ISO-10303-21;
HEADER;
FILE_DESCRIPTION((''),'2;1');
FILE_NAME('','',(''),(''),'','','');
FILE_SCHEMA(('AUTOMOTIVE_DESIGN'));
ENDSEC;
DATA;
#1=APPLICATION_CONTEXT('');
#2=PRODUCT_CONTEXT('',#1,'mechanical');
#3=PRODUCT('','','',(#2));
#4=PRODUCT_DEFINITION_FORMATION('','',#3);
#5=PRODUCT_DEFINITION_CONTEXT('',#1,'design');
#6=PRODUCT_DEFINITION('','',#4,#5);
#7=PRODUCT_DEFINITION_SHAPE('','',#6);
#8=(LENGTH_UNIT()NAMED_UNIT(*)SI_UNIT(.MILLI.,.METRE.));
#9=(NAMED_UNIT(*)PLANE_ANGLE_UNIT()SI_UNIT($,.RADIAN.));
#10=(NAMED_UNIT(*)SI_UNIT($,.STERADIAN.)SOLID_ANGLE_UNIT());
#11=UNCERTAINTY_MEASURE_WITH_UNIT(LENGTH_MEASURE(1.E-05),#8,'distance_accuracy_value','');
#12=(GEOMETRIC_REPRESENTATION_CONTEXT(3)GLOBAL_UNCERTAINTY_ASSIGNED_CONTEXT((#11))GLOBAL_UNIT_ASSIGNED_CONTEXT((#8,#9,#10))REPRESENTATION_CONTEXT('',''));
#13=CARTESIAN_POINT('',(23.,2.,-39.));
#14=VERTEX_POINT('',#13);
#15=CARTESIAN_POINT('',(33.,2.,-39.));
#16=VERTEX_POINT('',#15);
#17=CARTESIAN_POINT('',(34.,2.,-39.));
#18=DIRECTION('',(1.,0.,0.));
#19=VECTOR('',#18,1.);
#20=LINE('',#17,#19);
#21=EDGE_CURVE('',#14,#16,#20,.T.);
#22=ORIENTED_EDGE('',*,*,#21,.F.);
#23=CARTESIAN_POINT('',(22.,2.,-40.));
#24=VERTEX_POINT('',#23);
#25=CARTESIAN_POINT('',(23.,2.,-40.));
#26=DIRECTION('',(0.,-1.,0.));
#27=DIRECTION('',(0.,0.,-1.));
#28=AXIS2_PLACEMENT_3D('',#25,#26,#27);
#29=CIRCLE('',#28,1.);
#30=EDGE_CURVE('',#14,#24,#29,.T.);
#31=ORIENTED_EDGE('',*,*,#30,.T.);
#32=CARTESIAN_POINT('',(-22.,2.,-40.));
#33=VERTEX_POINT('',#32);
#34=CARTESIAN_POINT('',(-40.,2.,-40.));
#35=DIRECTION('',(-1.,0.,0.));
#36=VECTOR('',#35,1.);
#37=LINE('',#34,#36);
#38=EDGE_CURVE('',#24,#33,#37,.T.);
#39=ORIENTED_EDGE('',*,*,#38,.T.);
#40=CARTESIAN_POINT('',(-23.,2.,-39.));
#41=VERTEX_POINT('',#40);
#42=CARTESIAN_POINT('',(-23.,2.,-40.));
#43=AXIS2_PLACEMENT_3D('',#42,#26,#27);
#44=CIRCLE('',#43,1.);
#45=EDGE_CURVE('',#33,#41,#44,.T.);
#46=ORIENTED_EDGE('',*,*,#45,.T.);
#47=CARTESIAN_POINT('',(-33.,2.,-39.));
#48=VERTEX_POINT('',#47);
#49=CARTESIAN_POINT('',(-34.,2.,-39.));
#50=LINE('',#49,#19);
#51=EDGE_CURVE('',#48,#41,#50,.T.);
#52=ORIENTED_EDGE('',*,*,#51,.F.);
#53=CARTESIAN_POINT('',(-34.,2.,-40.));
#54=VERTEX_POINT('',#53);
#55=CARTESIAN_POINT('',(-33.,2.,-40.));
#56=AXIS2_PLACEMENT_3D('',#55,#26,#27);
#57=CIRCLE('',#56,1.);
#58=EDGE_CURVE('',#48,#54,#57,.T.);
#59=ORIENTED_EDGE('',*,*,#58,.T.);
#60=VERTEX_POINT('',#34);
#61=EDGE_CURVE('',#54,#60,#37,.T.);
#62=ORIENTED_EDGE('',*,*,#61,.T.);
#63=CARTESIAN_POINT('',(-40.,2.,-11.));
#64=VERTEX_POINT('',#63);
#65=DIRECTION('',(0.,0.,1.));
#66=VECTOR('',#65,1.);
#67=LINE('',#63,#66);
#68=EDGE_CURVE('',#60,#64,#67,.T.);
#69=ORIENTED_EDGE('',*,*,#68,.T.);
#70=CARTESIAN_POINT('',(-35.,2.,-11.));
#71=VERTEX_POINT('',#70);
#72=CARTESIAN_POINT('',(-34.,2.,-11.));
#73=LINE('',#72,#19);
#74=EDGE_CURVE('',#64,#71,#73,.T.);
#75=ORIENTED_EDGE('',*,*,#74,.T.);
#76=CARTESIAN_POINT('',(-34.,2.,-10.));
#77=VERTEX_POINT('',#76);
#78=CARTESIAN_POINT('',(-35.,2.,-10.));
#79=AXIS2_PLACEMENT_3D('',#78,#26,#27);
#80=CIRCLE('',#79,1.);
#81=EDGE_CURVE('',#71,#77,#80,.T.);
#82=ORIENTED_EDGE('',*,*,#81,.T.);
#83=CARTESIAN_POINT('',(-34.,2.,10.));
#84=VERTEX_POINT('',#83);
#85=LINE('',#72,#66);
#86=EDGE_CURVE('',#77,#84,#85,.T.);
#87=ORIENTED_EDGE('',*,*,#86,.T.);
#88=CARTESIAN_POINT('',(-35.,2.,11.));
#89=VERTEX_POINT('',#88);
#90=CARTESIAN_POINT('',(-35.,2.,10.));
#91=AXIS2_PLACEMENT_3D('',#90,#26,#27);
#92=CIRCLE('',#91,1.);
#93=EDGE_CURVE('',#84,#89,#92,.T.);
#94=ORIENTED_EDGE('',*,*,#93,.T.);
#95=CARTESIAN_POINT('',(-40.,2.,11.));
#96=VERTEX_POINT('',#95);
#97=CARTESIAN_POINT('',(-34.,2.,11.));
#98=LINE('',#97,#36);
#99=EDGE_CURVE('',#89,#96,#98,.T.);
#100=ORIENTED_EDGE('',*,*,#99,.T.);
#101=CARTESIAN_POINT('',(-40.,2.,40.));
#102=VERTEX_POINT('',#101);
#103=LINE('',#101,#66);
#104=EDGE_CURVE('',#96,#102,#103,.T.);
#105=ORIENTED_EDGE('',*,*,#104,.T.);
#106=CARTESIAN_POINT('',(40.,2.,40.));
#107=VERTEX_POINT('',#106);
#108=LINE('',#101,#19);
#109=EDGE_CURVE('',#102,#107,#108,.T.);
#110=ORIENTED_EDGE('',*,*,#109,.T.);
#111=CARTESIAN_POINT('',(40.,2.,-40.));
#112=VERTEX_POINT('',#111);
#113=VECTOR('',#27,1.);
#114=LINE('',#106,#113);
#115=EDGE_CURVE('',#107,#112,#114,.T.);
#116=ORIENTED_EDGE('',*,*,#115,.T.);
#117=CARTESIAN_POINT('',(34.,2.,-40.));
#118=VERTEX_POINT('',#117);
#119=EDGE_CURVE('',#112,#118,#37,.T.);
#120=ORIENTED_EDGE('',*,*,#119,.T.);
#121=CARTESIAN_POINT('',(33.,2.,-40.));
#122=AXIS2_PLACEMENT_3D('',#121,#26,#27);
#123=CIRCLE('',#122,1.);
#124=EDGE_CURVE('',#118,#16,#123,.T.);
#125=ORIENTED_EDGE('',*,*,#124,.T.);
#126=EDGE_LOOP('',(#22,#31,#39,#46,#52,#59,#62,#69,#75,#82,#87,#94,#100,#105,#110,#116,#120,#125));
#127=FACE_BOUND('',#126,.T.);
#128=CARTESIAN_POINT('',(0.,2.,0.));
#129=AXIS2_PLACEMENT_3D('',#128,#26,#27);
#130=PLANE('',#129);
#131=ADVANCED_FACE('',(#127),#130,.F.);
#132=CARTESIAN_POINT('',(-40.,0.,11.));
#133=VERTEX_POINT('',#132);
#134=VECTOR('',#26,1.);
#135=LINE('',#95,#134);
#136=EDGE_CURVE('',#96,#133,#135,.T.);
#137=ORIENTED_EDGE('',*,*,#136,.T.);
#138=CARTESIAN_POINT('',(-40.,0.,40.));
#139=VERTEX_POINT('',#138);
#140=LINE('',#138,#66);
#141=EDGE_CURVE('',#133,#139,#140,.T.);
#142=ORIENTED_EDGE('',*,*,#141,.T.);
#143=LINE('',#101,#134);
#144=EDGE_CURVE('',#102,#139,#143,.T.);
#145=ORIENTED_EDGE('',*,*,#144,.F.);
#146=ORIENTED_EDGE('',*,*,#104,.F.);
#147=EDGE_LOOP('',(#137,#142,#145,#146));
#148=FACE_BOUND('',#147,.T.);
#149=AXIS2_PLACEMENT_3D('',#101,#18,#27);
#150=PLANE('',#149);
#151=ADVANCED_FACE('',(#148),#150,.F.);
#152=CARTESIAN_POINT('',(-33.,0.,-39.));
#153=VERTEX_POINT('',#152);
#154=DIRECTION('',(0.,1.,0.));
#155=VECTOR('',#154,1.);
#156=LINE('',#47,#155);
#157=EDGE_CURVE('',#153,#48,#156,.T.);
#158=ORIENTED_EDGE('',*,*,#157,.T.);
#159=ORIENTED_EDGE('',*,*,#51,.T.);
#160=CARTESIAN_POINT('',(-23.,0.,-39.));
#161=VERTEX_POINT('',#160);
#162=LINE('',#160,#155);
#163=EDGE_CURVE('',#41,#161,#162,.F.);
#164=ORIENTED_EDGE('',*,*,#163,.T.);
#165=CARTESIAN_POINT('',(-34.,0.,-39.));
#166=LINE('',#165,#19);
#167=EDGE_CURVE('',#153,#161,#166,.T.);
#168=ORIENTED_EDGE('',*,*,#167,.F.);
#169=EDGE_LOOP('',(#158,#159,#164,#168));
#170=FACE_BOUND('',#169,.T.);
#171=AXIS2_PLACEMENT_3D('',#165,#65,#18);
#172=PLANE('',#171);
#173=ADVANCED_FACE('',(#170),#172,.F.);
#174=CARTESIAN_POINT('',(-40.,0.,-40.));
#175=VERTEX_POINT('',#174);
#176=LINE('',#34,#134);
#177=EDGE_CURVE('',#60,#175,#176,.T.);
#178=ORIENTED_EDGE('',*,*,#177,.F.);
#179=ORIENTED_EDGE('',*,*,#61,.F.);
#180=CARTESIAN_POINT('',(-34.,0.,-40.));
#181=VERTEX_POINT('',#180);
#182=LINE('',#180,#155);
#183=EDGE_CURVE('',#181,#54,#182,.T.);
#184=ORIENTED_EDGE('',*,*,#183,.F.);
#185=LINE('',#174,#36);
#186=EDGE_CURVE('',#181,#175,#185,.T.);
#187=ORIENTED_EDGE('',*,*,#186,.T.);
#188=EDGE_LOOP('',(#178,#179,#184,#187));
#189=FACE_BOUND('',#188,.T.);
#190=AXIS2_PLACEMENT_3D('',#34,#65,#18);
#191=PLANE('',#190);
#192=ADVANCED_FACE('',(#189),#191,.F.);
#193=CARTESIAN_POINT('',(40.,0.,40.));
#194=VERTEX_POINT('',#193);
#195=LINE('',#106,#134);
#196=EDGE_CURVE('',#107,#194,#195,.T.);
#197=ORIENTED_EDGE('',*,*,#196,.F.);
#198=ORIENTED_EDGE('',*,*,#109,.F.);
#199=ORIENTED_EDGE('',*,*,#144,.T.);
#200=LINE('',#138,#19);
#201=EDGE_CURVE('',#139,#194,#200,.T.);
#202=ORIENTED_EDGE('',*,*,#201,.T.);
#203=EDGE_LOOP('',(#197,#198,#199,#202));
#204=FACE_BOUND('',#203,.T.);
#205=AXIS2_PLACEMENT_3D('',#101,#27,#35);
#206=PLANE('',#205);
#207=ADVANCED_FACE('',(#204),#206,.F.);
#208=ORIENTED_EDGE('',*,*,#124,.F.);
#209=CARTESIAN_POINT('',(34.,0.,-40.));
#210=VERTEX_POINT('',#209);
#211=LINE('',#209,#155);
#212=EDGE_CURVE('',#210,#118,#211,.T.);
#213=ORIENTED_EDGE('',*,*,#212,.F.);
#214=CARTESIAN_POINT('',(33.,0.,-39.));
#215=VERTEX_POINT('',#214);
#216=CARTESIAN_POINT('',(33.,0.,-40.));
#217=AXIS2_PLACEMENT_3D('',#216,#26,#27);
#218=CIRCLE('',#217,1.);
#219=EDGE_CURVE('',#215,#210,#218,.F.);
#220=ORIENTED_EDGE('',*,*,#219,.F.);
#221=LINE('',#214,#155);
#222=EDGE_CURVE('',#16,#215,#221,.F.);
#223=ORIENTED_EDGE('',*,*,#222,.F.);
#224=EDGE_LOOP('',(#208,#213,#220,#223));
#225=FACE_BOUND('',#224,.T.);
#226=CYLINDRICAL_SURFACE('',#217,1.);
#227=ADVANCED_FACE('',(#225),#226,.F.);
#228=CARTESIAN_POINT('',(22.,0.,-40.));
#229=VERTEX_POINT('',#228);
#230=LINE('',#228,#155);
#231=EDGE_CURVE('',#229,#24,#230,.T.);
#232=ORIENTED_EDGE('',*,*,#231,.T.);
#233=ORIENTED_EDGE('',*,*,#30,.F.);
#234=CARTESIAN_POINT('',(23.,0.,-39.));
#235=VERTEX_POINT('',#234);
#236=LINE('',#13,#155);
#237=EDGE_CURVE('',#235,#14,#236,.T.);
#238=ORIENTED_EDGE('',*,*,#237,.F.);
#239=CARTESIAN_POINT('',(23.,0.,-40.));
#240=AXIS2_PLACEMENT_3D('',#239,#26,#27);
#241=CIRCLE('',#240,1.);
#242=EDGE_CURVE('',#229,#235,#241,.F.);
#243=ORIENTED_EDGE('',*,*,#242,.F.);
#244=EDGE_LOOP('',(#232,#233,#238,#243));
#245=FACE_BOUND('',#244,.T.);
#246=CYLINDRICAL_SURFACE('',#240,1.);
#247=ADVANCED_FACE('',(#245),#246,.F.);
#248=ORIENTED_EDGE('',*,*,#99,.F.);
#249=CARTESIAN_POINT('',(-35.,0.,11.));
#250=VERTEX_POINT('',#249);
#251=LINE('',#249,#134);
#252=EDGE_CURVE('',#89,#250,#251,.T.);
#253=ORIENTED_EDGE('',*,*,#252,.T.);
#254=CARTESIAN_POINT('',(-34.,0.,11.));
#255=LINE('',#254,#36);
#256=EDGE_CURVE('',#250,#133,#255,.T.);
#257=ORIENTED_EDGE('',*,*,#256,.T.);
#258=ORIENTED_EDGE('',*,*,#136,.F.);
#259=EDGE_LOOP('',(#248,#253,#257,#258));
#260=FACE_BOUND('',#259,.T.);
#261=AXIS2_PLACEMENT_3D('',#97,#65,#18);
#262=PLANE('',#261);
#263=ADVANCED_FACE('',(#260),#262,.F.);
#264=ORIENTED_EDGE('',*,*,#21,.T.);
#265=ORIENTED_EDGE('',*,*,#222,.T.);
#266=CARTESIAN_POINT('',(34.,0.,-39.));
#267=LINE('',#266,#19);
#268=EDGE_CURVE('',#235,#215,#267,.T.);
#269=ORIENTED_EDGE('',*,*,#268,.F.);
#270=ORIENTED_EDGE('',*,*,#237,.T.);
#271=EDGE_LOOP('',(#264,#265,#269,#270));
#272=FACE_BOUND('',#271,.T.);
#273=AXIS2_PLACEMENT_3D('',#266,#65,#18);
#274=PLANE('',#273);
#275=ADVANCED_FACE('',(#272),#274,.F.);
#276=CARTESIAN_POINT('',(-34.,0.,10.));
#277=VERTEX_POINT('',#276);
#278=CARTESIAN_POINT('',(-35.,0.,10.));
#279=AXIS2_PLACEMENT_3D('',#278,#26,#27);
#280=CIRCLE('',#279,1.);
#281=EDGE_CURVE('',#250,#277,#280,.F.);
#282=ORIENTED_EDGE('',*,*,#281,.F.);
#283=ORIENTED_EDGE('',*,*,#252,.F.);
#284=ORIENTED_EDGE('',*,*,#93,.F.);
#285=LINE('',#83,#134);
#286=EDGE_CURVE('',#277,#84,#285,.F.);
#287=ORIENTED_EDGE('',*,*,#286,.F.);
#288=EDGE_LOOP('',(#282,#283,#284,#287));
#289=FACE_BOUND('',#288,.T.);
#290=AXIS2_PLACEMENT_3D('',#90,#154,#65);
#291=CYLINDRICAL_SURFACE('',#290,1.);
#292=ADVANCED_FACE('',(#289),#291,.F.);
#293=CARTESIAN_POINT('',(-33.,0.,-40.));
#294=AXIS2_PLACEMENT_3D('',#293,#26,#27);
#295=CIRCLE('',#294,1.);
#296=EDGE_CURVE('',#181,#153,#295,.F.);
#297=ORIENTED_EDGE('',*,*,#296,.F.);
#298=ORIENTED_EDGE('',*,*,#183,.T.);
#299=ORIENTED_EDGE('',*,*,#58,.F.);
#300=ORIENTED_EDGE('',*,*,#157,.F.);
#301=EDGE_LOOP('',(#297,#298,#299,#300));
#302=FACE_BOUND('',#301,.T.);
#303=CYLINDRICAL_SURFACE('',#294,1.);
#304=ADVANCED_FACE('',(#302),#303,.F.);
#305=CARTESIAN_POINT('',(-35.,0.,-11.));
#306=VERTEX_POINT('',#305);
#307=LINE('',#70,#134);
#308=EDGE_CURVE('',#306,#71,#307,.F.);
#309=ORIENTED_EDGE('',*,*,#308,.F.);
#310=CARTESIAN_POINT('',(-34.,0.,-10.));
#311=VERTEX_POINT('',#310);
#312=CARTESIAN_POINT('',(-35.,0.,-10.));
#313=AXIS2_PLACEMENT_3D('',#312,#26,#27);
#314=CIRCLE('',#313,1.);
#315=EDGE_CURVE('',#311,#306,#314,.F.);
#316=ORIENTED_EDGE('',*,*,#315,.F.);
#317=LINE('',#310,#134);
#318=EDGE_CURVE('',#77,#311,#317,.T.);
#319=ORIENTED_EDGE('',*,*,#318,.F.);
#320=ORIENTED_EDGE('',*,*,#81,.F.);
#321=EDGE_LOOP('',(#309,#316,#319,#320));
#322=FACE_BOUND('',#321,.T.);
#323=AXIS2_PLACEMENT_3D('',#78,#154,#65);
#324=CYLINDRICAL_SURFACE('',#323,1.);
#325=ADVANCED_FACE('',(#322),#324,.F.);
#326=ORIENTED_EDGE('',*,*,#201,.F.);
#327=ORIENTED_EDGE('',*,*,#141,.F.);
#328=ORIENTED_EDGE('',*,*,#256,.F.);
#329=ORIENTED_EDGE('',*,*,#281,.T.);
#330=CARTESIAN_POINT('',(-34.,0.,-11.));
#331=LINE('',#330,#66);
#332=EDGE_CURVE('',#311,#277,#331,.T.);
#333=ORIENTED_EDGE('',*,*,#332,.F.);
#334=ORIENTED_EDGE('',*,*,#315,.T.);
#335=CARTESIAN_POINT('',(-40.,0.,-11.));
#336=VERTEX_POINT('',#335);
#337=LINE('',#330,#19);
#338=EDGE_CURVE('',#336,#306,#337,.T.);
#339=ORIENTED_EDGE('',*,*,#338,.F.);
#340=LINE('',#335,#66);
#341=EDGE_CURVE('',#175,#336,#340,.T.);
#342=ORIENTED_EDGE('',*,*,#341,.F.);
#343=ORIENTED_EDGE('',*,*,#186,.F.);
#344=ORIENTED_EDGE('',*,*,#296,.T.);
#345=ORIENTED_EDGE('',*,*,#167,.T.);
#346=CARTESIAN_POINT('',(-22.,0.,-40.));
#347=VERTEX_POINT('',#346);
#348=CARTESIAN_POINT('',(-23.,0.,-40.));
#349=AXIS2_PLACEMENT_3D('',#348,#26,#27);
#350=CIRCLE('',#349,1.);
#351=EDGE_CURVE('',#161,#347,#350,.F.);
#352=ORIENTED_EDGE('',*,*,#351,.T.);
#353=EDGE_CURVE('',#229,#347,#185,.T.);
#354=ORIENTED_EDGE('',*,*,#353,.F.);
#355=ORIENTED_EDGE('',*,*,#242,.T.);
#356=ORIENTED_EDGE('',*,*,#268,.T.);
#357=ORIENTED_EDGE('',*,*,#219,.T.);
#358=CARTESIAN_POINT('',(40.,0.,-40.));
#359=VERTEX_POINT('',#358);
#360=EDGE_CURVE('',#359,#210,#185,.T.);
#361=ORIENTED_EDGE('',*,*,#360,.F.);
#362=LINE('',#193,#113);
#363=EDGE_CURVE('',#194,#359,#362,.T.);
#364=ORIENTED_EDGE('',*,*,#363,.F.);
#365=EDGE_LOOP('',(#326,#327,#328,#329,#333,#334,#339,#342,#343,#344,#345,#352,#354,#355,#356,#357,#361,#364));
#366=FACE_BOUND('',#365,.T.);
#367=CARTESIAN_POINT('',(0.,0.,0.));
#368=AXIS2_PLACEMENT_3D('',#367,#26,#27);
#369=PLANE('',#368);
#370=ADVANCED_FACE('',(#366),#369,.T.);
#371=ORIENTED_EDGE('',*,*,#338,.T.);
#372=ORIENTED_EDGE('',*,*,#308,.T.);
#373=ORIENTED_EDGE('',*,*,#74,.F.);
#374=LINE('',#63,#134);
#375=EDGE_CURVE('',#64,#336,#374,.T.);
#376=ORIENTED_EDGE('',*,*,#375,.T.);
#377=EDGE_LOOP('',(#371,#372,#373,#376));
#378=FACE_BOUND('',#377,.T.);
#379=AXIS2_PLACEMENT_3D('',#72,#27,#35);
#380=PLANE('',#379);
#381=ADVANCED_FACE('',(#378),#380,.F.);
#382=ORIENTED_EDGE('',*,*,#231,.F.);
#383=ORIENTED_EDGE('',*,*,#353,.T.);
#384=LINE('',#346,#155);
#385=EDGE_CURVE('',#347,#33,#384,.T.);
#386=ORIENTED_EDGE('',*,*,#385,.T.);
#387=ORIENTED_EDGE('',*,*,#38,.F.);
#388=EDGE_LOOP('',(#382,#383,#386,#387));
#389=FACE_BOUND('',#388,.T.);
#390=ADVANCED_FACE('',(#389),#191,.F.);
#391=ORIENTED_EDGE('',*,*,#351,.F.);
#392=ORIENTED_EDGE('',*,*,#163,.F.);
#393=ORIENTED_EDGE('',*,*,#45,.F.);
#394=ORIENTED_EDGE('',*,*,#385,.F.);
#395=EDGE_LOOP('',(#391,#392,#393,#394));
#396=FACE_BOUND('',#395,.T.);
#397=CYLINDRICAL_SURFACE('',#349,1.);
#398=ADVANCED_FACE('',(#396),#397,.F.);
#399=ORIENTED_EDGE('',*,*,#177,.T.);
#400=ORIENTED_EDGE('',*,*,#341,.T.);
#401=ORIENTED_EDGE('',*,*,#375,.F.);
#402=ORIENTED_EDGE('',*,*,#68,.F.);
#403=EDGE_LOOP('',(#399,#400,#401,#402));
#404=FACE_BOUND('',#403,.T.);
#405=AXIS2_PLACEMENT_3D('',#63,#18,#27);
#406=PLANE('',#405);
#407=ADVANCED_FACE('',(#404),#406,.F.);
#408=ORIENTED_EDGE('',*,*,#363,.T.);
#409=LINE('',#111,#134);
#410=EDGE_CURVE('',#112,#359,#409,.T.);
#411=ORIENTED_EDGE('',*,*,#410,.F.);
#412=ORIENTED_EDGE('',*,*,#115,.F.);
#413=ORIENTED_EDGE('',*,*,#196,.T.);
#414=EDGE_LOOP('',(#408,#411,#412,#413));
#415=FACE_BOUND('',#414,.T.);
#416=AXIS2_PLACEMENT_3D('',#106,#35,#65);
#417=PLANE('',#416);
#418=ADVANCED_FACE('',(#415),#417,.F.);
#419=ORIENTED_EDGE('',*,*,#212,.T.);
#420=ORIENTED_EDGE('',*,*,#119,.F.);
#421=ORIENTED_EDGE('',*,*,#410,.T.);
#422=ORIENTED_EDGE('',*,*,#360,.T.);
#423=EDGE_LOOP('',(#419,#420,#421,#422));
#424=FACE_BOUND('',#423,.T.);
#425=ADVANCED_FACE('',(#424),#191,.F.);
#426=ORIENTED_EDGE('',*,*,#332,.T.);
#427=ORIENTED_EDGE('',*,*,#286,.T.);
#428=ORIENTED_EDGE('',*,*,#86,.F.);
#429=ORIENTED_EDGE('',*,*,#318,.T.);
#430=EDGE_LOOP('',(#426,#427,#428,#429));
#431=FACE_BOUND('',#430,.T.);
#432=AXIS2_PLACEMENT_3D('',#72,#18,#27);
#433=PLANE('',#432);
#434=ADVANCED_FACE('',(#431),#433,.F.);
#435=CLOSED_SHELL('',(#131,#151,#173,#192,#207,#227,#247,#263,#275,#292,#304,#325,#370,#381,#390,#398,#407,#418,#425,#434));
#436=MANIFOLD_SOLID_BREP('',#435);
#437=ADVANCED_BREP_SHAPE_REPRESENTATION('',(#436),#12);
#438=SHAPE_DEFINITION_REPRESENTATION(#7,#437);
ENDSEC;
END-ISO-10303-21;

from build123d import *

# Parameters (mm, degrees)
EXTRUDE_1_DEPTH     = 2
SKETCH_2_W          = 12
SKETCH_2_H          = 1
CUT_EXTRUDE_1_DEPTH = 2
FILLET_1_R          = 1
FILLET_2_R          = 1


with BuildPart() as part:
    # 草图1 → 凸台-拉伸1 (new body)
    with BuildSketch(Plane(origin=(0, 0, 0), x_dir=(1, 0, 0), z_dir=(0, 1, 0))):
        Polygon((-40, 11), (-40, 40), (40, 40), (40, -40), (-40, -40), (-40, -11), (-34, -11), (-34, 11), align=None)
    extrude(amount=EXTRUDE_1_DEPTH)

    # 草图2 → 切除-拉伸1 (cut)
    with BuildSketch(Plane(origin=(0, 2, 0), x_dir=(1, 0, 0), z_dir=(0, 1, 0))):
        with Locations((-28, 39.5)):
            Rectangle(SKETCH_2_W, SKETCH_2_H)
        with Locations((28, 39.5)):
            Rectangle(SKETCH_2_W, SKETCH_2_H)
    extrude(amount=-CUT_EXTRUDE_1_DEPTH, mode=Mode.SUBTRACT)

    # 圆角1
    fillet_1_edges = [part.edges().sort_by_distance(p)[0] for p in [
        (22, 1, -39),
        (34, 1, -39),
        (-34, 1, -39),
        (-22, 1, -39),
    ]]
    fillet(fillet_1_edges, radius=FILLET_1_R - 0.0001)  # a hair under: the kernel refuses the full size

    # 圆角2
    fillet_2_edges = [part.edges().sort_by_distance(p)[0] for p in [
        (-34, 1, 11),
        (-34, 1, -11),
    ]]
    fillet(fillet_2_edges, radius=FILLET_2_R)


solid = part.part
